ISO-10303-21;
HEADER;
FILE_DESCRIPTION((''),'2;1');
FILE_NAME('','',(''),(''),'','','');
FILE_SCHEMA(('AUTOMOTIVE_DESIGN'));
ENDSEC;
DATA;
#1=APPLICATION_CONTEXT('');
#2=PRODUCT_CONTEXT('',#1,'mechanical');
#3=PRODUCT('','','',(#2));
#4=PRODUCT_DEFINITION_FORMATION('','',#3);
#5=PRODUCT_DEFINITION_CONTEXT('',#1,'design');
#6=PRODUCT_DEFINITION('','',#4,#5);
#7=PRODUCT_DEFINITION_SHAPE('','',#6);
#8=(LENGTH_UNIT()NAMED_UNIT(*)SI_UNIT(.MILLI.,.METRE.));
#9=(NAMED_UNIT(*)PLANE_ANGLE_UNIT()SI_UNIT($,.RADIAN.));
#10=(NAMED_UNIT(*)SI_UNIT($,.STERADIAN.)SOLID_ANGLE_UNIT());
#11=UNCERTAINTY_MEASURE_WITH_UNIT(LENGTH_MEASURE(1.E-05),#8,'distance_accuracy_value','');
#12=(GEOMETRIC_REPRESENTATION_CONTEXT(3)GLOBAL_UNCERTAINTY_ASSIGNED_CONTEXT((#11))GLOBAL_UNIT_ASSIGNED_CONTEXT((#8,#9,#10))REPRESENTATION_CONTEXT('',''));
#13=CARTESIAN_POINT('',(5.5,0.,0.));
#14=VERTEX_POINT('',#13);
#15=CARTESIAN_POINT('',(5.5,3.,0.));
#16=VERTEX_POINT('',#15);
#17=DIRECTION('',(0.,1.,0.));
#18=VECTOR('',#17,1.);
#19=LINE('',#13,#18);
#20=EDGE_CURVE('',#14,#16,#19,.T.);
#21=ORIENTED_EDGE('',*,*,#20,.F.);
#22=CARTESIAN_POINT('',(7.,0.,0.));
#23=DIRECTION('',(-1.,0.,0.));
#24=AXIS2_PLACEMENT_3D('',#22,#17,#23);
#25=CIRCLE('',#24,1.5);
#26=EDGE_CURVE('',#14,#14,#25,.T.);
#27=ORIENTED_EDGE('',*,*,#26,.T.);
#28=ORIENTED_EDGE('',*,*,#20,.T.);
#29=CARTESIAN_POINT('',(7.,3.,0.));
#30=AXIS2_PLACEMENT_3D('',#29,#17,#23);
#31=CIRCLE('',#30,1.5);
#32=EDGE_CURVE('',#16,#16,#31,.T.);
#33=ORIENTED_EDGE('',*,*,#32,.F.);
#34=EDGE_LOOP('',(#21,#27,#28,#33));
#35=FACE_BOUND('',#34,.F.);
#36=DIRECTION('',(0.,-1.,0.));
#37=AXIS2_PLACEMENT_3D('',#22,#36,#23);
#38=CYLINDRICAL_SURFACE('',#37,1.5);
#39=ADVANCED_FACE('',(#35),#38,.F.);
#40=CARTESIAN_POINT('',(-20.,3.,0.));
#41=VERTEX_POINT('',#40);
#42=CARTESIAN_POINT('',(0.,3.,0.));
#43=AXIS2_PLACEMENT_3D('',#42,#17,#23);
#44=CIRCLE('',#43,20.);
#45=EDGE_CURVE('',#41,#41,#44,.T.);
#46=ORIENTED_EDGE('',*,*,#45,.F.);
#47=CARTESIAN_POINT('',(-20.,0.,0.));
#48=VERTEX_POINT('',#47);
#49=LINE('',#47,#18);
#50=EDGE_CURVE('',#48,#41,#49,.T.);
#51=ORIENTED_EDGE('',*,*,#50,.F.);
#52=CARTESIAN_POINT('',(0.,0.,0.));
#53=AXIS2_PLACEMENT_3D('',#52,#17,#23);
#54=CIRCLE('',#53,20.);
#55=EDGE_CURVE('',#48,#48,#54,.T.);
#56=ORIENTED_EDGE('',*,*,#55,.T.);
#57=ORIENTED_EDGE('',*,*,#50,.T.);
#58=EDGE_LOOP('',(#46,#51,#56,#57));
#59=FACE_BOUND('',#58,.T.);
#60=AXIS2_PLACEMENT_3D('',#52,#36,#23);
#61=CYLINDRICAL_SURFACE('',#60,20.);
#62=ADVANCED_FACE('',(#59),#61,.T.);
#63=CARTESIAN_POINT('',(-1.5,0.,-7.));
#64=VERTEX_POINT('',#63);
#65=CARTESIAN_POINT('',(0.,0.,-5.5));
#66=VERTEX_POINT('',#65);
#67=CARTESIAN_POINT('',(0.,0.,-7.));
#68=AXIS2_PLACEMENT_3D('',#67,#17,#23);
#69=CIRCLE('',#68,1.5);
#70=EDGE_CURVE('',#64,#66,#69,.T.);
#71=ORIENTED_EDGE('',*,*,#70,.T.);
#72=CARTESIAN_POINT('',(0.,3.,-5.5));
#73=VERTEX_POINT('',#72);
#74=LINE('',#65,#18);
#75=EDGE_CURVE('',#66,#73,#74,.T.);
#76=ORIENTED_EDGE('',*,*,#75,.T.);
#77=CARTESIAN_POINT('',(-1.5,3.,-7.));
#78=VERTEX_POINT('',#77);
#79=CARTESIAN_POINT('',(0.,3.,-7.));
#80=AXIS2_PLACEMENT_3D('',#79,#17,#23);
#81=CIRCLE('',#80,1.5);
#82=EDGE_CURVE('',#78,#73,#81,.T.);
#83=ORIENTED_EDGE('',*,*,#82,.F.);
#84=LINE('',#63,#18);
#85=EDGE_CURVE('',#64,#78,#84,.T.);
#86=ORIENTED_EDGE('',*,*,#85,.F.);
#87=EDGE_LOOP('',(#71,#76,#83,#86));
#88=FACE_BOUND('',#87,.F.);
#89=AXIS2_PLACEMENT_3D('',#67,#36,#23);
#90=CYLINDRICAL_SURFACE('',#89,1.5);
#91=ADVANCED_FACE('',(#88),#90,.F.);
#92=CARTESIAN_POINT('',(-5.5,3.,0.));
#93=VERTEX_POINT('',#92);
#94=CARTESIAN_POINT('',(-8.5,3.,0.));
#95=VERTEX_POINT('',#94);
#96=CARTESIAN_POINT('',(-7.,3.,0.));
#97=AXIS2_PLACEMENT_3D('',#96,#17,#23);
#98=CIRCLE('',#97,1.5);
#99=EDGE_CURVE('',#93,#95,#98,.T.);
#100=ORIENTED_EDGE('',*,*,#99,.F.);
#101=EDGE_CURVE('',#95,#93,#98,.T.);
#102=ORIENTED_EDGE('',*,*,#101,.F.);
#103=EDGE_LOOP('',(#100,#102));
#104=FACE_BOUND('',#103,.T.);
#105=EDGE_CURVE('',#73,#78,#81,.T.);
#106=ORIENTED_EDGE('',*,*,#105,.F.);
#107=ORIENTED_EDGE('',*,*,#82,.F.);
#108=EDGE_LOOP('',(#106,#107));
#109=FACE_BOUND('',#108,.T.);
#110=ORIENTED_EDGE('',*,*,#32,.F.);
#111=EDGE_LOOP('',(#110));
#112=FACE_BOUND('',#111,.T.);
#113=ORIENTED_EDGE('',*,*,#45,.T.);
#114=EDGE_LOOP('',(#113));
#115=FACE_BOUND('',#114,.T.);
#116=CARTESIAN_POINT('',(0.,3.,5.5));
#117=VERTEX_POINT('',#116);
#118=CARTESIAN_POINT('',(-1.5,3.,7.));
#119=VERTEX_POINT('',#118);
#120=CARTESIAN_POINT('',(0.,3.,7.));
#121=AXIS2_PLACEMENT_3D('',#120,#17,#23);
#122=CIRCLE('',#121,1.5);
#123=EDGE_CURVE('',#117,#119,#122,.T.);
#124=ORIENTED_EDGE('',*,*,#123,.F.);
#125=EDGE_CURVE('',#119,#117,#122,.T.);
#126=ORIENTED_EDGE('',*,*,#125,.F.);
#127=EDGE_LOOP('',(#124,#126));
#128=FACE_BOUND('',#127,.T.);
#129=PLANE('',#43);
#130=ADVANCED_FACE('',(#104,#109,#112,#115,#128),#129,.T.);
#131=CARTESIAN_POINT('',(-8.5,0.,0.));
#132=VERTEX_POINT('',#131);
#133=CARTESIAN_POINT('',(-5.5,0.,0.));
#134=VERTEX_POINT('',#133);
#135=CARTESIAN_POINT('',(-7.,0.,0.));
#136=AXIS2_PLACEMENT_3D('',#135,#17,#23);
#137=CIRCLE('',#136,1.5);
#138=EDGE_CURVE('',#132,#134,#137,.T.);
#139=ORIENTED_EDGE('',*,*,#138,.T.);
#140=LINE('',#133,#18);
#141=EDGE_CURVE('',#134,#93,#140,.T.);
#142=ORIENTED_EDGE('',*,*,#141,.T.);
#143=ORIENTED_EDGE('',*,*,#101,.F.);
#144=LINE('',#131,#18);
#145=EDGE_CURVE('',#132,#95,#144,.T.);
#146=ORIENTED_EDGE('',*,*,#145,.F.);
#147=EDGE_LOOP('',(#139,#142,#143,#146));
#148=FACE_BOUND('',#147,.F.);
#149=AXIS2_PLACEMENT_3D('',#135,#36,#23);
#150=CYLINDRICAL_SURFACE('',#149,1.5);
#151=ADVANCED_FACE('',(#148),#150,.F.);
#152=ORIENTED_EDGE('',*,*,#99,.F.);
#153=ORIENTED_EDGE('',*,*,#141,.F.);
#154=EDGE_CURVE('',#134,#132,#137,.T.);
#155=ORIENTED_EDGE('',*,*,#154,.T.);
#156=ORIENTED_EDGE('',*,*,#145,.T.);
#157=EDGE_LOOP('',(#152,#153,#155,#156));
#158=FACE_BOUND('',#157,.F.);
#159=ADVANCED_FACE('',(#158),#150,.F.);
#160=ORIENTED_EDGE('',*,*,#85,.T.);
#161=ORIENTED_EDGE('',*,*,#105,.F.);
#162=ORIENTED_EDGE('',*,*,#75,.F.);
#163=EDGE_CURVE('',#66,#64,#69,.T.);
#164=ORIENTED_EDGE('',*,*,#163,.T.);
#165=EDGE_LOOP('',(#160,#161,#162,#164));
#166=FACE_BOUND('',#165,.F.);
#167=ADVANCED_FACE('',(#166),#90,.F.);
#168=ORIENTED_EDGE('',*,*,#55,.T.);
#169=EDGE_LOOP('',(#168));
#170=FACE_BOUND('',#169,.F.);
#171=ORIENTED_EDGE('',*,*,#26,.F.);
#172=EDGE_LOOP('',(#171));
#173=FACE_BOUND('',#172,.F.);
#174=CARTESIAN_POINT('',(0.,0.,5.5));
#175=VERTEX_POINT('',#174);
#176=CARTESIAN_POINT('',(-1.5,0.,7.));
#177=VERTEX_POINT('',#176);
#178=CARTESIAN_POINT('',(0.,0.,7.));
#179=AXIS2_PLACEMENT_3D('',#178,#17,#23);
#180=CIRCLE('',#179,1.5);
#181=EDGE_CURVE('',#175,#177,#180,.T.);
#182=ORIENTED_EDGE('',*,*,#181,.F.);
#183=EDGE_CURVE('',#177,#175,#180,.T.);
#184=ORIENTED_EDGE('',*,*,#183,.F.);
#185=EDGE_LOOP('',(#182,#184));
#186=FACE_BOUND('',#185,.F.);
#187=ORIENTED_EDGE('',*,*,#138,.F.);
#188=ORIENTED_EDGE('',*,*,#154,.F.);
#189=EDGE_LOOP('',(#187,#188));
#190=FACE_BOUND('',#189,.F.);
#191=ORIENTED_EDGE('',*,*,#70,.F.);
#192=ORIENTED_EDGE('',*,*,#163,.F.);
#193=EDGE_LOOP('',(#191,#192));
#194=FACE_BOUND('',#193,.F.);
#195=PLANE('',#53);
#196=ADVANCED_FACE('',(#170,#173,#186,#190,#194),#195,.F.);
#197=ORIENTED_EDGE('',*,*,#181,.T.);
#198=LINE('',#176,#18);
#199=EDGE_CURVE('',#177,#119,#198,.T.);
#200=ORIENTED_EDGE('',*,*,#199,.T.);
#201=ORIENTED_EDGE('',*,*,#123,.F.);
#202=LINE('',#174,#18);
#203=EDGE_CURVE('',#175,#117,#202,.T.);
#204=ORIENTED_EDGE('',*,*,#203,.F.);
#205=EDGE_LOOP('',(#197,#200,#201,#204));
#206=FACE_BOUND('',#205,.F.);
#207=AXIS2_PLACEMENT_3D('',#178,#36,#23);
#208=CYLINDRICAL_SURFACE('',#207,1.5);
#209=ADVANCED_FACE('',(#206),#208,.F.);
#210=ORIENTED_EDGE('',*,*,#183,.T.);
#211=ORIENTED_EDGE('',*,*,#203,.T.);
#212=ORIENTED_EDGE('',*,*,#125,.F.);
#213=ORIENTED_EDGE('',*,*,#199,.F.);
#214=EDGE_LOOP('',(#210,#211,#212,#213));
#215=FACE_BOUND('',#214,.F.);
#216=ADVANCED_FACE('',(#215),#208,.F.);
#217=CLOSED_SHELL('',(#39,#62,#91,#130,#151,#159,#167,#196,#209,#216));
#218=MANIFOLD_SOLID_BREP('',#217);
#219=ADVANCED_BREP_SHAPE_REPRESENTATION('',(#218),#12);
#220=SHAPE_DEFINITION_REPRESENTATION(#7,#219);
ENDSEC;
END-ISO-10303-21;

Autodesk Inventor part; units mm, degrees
ref_plane "YZ Plane" through (0, 0, 0) normal (1, 0, 0) x (0, 1, 0)
ref_plane "XZ Plane" through (0, 0, 0) normal (0, 1, 0) x (-1, 0, 0)
ref_plane "XY Plane" through (0, 0, 0) normal (0, 0, 1) x (1, 0, 0)
sketch "Sketch1" plane through (0, 0, 0) normal (0, 1, 0) x (-1, 0, 0)
  circle A0 centre (0, 0) radius 20
  line L0 (0, 0) -> (0, 7)
  line L1 (0, 0) -> (-7, 0)
  line L2 (0, 0) -> (0, -7)
  line L3 (0, 0) -> (7, 0)
  circle A1 centre (-7, 0) radius 1.5
  circle A2 centre (0, 7) radius 1.5
  circle A3 centre (0, -7) radius 1.5
  circle A4 centre (7, 0) radius 1.5
  dimension "d0" = 40
  dimension "d1" = 7
  dimension "d2" = 7
  dimension "d3" = 7
  dimension "d4" = 7
  dimension "d5" = 3
  dimension "d6" = 3
  dimension "d8" = 3
  dimension "d11" = 3
extrude "Extrusion2" add sketch "Sketch1" along normal blind 3
properties part number "Wrist Sprocket"
